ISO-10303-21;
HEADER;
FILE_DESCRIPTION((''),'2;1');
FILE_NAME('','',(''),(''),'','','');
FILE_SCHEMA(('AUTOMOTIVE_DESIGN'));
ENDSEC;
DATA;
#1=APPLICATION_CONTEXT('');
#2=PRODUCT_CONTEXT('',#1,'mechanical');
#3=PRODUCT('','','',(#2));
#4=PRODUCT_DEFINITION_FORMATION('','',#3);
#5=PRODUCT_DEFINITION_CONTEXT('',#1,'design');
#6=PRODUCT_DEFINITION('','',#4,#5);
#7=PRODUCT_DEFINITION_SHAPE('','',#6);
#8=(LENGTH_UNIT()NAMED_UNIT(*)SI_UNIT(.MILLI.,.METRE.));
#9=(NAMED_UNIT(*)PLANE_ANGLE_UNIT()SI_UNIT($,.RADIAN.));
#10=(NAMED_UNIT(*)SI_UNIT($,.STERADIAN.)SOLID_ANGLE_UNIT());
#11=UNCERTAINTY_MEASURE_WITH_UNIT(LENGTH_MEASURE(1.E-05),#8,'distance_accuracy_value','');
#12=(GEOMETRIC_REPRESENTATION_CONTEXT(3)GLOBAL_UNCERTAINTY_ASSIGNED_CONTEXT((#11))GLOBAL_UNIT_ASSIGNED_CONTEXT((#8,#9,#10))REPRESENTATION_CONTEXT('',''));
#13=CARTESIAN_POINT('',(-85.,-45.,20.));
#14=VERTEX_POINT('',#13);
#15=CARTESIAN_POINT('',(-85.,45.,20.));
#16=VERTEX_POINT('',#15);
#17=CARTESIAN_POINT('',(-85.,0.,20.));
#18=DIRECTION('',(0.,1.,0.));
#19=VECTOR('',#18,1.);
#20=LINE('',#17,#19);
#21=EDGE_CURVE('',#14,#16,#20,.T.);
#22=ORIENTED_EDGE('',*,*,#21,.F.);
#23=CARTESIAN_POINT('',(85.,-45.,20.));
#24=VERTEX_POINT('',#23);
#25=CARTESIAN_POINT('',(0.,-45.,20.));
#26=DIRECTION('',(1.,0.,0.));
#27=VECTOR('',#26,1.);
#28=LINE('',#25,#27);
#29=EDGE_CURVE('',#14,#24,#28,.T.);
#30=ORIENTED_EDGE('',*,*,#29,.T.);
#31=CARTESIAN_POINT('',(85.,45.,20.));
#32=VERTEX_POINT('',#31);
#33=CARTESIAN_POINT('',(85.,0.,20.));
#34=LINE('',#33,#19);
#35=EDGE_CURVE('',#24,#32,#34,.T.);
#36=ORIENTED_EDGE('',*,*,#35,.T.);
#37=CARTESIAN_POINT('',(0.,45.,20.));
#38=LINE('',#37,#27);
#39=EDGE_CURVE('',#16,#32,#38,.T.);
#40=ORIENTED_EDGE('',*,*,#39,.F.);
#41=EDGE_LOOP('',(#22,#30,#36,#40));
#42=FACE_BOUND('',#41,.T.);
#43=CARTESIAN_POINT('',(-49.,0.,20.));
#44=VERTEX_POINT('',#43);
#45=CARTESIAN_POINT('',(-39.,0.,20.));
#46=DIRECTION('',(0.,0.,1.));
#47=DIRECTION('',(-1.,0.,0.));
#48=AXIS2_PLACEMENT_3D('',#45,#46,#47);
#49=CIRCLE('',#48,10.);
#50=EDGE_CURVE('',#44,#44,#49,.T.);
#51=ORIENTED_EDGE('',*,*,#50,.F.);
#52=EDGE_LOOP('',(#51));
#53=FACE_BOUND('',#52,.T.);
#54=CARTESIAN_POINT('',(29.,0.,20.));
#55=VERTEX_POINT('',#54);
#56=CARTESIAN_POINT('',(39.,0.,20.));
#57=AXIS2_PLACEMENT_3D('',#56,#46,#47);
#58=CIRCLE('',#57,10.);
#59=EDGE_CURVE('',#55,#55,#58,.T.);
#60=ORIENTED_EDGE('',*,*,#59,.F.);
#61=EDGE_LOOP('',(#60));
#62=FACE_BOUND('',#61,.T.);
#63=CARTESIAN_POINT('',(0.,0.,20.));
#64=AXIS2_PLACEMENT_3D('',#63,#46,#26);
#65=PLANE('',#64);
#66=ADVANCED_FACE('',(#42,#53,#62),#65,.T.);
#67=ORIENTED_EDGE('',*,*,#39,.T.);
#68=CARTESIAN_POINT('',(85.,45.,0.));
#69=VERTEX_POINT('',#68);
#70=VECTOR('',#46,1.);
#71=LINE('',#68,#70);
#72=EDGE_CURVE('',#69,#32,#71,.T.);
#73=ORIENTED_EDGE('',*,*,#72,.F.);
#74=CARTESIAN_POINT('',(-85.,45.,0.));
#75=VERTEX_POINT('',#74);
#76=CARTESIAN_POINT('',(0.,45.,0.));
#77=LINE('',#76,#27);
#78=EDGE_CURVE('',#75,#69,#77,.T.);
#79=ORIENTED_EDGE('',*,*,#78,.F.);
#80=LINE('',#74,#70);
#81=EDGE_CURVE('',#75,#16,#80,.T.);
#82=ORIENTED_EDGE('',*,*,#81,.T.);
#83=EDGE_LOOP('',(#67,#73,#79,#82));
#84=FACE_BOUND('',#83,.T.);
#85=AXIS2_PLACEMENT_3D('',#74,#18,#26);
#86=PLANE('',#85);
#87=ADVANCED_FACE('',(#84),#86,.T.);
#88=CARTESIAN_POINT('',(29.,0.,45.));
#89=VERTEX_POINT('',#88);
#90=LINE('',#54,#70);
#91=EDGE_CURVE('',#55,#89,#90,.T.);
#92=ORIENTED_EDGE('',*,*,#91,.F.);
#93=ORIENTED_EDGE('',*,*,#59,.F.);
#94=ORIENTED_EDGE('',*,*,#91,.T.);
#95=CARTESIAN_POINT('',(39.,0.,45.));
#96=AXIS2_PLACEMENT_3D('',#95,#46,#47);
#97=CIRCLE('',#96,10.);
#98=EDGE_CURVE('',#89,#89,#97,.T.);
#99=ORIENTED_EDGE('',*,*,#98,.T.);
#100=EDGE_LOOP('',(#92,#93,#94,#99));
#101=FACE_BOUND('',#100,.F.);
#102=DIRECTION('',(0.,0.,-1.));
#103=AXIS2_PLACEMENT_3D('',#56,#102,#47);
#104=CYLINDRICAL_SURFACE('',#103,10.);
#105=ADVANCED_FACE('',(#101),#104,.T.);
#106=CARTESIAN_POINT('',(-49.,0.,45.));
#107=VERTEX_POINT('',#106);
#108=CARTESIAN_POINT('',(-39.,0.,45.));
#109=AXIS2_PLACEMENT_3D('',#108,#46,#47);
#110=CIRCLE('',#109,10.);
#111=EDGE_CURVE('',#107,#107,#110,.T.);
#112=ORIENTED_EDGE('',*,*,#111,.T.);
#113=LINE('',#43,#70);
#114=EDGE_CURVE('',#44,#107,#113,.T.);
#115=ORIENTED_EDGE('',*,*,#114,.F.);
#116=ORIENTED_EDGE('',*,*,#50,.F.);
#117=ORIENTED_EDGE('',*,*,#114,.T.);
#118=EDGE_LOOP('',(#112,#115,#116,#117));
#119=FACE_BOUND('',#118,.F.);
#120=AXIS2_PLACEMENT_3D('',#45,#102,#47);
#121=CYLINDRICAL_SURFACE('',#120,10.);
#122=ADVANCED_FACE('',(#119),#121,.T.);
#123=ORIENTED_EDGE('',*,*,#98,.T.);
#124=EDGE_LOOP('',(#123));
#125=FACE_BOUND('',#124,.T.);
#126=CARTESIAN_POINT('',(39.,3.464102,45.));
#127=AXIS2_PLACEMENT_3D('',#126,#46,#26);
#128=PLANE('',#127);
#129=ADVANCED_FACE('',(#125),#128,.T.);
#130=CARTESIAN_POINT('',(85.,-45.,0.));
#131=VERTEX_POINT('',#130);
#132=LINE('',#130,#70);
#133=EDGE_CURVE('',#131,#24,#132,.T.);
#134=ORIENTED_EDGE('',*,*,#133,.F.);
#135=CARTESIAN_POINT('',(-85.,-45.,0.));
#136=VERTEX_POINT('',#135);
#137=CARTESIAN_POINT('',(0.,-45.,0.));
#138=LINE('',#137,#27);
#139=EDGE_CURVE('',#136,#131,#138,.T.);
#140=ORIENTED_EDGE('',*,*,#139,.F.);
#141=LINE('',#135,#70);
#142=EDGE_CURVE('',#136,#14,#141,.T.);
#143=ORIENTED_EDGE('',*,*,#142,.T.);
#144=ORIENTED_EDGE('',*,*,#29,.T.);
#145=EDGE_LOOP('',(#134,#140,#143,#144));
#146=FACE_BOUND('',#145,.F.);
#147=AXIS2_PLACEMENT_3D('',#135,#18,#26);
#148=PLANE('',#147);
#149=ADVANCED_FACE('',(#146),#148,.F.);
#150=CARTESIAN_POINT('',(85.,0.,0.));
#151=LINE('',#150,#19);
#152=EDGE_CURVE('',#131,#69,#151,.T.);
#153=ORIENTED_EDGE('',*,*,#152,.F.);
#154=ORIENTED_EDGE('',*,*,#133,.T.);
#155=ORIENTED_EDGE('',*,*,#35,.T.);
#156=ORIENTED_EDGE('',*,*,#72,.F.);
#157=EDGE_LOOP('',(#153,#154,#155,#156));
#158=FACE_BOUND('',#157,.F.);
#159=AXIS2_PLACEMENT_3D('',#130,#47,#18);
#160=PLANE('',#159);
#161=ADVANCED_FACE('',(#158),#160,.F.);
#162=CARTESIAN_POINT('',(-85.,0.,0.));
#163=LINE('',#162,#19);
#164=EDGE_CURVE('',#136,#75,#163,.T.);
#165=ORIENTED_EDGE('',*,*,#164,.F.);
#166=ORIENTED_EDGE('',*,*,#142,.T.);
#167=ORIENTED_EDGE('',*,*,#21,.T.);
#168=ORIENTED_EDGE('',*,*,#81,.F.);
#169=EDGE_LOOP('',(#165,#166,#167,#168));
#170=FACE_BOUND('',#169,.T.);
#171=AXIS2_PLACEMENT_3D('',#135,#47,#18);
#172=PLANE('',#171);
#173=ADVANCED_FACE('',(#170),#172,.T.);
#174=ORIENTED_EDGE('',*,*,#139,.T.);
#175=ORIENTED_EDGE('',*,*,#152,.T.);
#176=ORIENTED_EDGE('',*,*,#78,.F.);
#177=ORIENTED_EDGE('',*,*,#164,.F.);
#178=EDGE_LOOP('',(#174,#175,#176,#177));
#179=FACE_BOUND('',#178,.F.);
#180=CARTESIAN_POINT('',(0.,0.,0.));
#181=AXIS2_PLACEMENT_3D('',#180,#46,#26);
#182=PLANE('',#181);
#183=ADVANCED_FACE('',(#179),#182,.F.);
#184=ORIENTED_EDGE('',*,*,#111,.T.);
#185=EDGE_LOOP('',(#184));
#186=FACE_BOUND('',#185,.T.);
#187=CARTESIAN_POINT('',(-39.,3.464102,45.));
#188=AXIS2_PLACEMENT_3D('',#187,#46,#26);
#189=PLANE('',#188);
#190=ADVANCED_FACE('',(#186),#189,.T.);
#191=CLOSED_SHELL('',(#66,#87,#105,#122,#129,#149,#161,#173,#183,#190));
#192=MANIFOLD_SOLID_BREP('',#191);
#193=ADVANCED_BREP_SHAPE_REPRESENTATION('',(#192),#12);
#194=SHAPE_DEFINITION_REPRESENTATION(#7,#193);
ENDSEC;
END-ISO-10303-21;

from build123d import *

# Parameters (mm, degrees)
F0_W     = 170
F0_H     = 90
F1_DEPTH = 20
F3_DEPTH = 25


with BuildPart() as f1:
    # F0 (on Top) → F1 (new body)
    with BuildSketch(Plane.XY):
        Rectangle(F0_W, F0_H)
    extrude(amount=F1_DEPTH)

    # F2 (on face) → F3 (join)
    with BuildSketch(Plane.XY.offset(20)):
        with BuildLine():
            Line((-49, 0), (-39, 0))
            Line((-39, 0), (-29, 0))
            ThreePointArc((-29, 0), (-39, 10), (-49, 0))
        make_face()
        with BuildLine():
            Line((-29, 0), (-39, 0))
            Line((-39, 0), (-49, 0))
            ThreePointArc((-49, 0), (-39, -10), (-29, 0))
        make_face()
        with BuildLine():
            ThreePointArc((49, 0), (39, 10), (29, 0))
            Line((29, 0), (39, 0))
            Line((39, 0), (49, 0))
        make_face()
        with BuildLine():
            Line((39, 0), (29, 0))
            ThreePointArc((29, 0), (39, -10), (49, 0))
            Line((49, 0), (39, 0))
        make_face()
    extrude(amount=F3_DEPTH)


solid = f1.part
